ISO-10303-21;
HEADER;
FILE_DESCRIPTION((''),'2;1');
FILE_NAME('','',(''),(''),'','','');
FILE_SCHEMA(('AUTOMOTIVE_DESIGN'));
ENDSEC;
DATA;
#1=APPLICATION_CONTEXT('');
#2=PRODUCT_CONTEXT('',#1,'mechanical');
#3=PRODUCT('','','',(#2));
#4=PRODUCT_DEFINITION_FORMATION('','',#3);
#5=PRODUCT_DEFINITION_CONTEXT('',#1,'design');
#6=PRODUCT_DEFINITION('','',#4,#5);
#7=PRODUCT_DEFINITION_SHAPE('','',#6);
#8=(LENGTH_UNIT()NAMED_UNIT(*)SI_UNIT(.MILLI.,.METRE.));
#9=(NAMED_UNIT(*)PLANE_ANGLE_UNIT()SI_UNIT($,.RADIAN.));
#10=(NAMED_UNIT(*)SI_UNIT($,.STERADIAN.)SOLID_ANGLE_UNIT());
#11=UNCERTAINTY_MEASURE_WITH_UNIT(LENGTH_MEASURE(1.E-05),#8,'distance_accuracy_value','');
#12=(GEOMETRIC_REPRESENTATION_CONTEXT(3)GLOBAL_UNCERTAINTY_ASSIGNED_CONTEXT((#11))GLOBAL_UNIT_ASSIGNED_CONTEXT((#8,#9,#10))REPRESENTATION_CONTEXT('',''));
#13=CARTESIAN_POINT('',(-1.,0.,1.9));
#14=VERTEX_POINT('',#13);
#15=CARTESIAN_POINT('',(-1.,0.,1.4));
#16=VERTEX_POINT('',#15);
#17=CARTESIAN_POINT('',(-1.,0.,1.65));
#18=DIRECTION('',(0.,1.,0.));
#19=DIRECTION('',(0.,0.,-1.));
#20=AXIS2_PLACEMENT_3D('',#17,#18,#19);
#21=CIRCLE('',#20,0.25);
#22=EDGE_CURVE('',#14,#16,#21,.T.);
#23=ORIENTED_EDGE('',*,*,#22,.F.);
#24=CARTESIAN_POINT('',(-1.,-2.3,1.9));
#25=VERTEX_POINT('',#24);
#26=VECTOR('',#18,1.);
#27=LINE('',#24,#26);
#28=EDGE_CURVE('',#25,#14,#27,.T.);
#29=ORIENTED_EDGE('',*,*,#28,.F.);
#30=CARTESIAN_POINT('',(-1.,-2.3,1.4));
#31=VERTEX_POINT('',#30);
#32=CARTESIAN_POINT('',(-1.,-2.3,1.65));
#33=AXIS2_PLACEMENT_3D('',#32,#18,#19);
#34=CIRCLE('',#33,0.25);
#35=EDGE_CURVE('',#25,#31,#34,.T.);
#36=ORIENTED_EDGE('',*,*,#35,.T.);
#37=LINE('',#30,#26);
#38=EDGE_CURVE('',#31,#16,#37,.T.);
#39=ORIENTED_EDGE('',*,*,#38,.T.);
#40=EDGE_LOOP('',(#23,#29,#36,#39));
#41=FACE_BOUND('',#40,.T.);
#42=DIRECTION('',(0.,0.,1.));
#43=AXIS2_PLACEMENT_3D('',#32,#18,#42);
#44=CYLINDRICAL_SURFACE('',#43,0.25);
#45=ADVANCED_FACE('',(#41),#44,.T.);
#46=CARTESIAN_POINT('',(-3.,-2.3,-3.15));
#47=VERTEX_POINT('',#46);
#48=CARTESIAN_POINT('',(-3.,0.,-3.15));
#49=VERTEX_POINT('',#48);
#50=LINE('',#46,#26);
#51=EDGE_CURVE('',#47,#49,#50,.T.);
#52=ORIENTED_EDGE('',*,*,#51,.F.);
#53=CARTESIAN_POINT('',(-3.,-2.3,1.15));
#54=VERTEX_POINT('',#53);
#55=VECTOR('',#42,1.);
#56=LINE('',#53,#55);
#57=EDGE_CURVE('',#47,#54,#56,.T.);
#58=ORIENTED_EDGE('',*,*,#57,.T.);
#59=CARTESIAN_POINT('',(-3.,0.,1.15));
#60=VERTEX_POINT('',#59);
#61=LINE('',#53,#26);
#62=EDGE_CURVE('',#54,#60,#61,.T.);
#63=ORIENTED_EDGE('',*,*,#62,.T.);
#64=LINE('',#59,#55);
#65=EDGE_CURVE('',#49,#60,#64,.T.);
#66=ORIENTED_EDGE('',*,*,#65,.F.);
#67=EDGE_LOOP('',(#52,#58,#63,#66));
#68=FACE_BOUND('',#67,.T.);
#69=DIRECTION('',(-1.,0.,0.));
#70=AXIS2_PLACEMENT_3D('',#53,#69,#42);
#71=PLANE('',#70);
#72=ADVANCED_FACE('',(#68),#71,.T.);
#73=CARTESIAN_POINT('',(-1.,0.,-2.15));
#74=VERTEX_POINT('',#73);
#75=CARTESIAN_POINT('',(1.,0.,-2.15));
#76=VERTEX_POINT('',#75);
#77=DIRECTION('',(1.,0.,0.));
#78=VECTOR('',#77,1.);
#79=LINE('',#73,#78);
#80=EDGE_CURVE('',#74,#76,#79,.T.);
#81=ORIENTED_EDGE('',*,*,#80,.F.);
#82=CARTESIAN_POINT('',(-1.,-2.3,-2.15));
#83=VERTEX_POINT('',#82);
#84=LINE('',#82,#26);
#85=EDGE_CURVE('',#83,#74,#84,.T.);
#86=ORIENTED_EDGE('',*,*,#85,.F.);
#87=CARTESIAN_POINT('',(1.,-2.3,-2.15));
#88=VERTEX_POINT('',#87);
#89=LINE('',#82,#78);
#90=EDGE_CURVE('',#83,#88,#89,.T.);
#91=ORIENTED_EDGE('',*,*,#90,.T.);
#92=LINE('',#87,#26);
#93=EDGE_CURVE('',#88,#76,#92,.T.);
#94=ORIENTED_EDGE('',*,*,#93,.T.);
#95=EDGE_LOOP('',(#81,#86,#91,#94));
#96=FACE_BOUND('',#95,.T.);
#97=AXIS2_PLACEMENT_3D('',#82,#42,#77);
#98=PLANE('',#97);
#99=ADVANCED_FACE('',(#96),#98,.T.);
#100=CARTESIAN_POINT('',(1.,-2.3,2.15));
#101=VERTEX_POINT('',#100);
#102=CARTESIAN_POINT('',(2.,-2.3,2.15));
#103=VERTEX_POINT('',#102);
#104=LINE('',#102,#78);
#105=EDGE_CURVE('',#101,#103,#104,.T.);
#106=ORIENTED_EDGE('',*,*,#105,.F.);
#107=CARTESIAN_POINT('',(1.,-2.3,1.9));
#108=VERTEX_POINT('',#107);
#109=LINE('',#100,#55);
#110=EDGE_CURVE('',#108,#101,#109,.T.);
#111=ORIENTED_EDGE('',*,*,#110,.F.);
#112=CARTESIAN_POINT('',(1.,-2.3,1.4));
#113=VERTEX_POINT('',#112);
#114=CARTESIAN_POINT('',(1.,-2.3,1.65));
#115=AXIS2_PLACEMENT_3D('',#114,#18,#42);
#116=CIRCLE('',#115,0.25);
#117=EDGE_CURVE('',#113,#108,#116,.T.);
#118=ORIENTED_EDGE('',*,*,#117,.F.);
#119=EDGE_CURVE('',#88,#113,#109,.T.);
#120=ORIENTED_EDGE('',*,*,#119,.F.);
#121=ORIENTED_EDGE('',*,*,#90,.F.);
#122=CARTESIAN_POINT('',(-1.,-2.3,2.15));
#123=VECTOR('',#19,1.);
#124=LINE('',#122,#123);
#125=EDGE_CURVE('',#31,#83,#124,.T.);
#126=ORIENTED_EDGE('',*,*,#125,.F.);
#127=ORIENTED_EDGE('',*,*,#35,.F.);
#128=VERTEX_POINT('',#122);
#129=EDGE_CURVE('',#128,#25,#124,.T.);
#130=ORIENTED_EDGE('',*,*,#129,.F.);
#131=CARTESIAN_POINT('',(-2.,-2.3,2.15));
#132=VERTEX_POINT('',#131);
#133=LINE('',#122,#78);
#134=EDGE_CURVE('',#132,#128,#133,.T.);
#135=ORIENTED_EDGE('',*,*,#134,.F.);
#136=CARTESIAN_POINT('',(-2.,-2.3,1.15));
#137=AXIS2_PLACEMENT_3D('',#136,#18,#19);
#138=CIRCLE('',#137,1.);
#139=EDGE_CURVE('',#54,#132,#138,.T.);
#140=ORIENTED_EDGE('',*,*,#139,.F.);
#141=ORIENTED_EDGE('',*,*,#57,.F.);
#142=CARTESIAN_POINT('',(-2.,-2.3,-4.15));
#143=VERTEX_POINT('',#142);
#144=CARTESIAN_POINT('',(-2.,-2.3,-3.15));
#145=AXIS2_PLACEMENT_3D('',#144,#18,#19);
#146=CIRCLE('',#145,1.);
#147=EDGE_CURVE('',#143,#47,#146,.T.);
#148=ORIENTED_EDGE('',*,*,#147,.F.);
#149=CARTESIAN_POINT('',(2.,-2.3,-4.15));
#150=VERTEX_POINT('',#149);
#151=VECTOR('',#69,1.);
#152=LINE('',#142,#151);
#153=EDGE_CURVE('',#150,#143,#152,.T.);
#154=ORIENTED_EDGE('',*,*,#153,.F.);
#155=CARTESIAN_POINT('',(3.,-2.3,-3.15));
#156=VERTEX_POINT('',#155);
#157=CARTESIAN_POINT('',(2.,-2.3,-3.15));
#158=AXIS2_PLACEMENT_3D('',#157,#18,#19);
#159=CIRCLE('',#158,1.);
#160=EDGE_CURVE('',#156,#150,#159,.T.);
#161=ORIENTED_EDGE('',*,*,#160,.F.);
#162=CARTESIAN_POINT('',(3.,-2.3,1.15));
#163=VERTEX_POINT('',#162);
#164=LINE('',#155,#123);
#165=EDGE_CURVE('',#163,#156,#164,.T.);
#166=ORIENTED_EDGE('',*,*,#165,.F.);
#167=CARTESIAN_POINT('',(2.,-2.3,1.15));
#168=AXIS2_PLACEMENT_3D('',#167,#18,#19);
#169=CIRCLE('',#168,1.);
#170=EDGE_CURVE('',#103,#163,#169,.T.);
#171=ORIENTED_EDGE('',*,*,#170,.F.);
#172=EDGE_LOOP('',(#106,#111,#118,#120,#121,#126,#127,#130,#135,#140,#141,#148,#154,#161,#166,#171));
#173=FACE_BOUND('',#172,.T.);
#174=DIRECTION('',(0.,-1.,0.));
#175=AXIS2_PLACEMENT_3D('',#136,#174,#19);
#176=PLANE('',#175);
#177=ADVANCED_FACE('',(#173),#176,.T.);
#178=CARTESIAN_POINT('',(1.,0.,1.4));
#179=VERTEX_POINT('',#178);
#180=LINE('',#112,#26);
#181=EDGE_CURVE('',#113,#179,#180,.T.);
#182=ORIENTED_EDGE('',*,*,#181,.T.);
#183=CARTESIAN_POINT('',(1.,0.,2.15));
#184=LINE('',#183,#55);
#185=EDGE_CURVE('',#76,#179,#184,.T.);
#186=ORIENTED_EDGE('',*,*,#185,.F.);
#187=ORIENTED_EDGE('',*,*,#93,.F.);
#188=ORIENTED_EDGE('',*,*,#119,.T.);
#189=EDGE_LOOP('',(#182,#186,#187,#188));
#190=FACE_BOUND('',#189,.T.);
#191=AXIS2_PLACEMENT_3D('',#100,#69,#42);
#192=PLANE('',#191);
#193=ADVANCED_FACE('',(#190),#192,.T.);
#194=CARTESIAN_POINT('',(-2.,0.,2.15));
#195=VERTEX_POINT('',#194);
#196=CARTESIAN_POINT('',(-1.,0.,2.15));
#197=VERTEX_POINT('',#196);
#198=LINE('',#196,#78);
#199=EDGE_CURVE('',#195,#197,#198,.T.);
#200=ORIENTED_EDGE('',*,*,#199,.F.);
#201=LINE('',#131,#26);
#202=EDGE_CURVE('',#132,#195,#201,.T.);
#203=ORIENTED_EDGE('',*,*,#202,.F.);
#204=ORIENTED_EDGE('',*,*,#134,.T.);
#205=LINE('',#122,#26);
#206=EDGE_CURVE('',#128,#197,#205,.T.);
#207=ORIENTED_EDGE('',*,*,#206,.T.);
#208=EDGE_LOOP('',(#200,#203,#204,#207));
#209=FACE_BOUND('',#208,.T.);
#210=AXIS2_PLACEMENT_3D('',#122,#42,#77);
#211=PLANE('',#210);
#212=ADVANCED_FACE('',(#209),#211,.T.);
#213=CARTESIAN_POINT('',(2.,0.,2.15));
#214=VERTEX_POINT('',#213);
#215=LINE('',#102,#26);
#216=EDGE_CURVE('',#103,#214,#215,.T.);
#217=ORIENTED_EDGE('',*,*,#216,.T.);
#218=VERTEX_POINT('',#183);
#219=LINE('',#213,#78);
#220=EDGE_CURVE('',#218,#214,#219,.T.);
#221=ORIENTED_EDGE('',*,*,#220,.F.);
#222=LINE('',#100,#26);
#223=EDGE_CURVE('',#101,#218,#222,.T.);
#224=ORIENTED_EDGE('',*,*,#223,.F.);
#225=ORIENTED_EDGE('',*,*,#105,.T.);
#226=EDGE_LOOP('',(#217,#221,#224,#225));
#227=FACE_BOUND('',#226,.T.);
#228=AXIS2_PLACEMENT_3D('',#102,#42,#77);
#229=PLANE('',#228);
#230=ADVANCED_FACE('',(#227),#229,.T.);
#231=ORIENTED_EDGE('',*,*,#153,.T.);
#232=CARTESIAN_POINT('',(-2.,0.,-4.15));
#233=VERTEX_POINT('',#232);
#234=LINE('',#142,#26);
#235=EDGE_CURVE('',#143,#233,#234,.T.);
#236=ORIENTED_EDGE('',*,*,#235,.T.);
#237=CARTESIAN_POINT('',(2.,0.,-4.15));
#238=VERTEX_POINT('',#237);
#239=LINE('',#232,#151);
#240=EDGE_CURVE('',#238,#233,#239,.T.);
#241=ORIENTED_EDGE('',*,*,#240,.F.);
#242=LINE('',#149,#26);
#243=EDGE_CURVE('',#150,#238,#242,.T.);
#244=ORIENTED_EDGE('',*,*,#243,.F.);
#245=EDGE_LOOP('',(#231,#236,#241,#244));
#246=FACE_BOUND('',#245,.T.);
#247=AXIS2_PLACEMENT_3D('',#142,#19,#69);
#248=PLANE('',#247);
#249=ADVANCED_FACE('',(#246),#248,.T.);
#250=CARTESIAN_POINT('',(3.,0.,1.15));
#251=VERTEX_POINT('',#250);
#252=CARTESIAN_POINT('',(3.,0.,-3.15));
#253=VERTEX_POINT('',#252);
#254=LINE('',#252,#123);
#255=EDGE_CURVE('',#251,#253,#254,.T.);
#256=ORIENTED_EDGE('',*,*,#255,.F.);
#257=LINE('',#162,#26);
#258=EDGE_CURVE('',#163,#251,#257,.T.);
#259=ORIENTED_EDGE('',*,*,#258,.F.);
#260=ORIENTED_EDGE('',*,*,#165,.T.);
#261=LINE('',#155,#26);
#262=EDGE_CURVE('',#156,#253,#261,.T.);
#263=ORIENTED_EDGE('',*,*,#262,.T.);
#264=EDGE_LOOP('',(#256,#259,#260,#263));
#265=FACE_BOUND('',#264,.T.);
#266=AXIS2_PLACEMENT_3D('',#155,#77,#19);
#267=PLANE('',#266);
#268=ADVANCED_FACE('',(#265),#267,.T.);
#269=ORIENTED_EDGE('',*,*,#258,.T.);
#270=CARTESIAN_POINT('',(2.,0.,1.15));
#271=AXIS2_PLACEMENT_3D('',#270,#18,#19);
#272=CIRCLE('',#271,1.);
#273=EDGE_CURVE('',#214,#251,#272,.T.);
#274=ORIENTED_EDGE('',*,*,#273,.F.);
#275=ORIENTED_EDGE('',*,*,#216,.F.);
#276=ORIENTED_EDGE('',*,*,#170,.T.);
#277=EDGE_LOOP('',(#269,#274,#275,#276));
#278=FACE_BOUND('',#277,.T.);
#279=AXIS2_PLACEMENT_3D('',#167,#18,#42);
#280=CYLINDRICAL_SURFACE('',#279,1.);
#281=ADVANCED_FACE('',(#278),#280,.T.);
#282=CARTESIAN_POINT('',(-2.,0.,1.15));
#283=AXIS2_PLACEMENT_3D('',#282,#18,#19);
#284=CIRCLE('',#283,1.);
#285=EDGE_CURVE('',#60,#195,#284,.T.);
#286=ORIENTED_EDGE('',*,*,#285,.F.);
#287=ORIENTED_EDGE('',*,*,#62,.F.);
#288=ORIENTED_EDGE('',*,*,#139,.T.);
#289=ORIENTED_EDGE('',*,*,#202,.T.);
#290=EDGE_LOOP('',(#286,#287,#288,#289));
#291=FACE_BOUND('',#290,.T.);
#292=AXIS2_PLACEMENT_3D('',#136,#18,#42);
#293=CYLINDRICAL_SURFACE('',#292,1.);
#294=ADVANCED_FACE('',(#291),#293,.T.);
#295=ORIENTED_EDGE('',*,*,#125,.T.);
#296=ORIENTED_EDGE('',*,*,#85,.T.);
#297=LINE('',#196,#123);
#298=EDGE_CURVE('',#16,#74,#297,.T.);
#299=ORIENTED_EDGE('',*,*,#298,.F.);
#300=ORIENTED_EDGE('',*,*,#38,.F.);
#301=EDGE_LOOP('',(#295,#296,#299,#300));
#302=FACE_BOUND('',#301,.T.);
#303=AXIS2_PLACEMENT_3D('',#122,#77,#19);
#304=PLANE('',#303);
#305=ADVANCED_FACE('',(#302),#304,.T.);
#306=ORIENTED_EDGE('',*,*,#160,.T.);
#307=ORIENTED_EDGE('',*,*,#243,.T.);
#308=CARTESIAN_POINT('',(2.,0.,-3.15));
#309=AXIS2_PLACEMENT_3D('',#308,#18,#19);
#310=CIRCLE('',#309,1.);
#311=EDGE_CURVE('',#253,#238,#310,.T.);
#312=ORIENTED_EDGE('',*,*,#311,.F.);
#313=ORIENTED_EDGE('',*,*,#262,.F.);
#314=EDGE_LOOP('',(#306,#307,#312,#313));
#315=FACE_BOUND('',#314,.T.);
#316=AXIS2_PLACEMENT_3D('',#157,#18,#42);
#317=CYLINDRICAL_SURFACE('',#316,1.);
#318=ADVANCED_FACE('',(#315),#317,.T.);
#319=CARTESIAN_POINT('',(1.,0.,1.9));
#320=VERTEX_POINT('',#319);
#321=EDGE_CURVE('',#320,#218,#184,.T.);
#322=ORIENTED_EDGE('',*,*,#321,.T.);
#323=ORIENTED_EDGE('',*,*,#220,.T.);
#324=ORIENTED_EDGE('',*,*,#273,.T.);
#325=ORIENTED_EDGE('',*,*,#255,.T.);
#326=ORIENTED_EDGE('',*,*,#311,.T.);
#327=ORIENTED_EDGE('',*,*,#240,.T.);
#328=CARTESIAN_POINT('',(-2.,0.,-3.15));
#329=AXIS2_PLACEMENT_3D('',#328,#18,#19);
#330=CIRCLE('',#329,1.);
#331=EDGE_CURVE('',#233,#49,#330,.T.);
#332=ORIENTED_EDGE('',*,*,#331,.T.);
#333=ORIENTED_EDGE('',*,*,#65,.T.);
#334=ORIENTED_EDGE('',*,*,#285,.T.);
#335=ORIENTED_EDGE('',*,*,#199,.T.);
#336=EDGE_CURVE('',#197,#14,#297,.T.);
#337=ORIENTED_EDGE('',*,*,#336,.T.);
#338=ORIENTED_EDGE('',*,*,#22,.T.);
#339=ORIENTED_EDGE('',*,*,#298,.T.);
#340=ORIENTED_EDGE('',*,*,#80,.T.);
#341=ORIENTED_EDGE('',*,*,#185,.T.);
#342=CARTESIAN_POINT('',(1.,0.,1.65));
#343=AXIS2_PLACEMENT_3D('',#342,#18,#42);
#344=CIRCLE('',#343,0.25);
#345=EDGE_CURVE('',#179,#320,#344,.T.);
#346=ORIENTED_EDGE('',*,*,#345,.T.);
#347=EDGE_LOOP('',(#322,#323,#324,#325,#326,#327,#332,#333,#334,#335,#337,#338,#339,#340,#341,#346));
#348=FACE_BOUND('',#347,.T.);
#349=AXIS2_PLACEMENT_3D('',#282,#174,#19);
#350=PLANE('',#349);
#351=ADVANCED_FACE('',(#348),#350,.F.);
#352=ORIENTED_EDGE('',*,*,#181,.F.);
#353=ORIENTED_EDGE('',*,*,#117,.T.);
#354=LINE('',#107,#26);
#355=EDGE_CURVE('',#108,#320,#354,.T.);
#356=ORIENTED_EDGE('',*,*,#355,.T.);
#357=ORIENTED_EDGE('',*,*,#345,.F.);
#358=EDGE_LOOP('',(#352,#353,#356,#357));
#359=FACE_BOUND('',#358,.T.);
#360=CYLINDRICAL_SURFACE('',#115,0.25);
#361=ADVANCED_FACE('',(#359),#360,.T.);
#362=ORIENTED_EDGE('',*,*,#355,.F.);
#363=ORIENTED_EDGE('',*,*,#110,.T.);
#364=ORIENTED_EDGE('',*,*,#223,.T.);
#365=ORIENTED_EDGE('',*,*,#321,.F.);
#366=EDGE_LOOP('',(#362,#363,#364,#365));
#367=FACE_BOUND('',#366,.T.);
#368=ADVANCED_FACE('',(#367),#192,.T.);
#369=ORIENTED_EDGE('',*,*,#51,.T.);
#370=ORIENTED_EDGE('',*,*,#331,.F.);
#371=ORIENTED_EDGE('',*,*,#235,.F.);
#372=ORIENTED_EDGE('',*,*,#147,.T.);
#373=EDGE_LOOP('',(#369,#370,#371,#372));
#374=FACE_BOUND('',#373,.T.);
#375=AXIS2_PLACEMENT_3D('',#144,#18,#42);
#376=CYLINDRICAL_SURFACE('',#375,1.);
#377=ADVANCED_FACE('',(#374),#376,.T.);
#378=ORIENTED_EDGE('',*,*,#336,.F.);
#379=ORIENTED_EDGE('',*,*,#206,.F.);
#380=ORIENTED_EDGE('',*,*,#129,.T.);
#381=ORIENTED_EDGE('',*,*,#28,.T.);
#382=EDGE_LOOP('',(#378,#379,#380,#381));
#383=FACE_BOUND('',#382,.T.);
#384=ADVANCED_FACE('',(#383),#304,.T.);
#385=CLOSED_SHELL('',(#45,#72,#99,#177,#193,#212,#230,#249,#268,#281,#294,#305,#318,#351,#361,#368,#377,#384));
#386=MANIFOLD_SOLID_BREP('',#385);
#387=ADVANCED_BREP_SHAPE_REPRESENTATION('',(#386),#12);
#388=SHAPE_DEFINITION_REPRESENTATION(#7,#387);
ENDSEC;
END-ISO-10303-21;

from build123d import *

# Parameters (mm, degrees)
BASE_FLANGE1_DEPTH = 2.3
TAB1_DEPTH         = 2.3


# Sheet-metal steps are written as plain solids
with BuildPart() as part:
    # Sketch1 → Base-Flange1 (new body)
    with BuildSketch(Plane(origin=(0, 0, 0), x_dir=(1, 0, 0), z_dir=(0, 1, 0))):
        with BuildLine():
            Line((-1, -2.15), (-2, -2.15))
            ThreePointArc((-2, -2.15), (-2.707106781, -1.857106781), (-3, -1.15))
            Line((-3, -1.15), (-3, 3.15))
            ThreePointArc((-3, 3.15), (-2.707106781, 3.857106781), (-2, 4.15))
            Line((-2, 4.15), (2, 4.15))
            ThreePointArc((2, 4.15), (2.707106781, 3.857106781), (3, 3.15))
            Line((3, 3.15), (3, -1.15))
            ThreePointArc((3, -1.15), (2.707106781, -1.857106781), (2, -2.15))
            Line((2, -2.15), (1, -2.15))
            Line((1, -2.15), (1, 2.15))
            Line((1, 2.15), (-1, 2.15))
            Line((-1, 2.15), (-1, -2.15))
        make_face()
    extrude(amount=-BASE_FLANGE1_DEPTH)

    # Sketch6 → Tab1 (add)
    with BuildSketch(Plane(origin=(0, 0, 0), x_dir=(1, 0, 0), z_dir=(0, 1, 0))):
        with BuildLine():
            Line((-1, -1.9), (-1, -1.4))
            ThreePointArc((-1, -1.4), (-0.75, -1.65), (-1, -1.9))
        make_face()
        with BuildLine():
            Line((1, -1.9), (1, -1.4))
            ThreePointArc((1, -1.4), (0.75, -1.65), (1, -1.9))
        make_face()
    extrude(amount=-TAB1_DEPTH)


solid = part.part
